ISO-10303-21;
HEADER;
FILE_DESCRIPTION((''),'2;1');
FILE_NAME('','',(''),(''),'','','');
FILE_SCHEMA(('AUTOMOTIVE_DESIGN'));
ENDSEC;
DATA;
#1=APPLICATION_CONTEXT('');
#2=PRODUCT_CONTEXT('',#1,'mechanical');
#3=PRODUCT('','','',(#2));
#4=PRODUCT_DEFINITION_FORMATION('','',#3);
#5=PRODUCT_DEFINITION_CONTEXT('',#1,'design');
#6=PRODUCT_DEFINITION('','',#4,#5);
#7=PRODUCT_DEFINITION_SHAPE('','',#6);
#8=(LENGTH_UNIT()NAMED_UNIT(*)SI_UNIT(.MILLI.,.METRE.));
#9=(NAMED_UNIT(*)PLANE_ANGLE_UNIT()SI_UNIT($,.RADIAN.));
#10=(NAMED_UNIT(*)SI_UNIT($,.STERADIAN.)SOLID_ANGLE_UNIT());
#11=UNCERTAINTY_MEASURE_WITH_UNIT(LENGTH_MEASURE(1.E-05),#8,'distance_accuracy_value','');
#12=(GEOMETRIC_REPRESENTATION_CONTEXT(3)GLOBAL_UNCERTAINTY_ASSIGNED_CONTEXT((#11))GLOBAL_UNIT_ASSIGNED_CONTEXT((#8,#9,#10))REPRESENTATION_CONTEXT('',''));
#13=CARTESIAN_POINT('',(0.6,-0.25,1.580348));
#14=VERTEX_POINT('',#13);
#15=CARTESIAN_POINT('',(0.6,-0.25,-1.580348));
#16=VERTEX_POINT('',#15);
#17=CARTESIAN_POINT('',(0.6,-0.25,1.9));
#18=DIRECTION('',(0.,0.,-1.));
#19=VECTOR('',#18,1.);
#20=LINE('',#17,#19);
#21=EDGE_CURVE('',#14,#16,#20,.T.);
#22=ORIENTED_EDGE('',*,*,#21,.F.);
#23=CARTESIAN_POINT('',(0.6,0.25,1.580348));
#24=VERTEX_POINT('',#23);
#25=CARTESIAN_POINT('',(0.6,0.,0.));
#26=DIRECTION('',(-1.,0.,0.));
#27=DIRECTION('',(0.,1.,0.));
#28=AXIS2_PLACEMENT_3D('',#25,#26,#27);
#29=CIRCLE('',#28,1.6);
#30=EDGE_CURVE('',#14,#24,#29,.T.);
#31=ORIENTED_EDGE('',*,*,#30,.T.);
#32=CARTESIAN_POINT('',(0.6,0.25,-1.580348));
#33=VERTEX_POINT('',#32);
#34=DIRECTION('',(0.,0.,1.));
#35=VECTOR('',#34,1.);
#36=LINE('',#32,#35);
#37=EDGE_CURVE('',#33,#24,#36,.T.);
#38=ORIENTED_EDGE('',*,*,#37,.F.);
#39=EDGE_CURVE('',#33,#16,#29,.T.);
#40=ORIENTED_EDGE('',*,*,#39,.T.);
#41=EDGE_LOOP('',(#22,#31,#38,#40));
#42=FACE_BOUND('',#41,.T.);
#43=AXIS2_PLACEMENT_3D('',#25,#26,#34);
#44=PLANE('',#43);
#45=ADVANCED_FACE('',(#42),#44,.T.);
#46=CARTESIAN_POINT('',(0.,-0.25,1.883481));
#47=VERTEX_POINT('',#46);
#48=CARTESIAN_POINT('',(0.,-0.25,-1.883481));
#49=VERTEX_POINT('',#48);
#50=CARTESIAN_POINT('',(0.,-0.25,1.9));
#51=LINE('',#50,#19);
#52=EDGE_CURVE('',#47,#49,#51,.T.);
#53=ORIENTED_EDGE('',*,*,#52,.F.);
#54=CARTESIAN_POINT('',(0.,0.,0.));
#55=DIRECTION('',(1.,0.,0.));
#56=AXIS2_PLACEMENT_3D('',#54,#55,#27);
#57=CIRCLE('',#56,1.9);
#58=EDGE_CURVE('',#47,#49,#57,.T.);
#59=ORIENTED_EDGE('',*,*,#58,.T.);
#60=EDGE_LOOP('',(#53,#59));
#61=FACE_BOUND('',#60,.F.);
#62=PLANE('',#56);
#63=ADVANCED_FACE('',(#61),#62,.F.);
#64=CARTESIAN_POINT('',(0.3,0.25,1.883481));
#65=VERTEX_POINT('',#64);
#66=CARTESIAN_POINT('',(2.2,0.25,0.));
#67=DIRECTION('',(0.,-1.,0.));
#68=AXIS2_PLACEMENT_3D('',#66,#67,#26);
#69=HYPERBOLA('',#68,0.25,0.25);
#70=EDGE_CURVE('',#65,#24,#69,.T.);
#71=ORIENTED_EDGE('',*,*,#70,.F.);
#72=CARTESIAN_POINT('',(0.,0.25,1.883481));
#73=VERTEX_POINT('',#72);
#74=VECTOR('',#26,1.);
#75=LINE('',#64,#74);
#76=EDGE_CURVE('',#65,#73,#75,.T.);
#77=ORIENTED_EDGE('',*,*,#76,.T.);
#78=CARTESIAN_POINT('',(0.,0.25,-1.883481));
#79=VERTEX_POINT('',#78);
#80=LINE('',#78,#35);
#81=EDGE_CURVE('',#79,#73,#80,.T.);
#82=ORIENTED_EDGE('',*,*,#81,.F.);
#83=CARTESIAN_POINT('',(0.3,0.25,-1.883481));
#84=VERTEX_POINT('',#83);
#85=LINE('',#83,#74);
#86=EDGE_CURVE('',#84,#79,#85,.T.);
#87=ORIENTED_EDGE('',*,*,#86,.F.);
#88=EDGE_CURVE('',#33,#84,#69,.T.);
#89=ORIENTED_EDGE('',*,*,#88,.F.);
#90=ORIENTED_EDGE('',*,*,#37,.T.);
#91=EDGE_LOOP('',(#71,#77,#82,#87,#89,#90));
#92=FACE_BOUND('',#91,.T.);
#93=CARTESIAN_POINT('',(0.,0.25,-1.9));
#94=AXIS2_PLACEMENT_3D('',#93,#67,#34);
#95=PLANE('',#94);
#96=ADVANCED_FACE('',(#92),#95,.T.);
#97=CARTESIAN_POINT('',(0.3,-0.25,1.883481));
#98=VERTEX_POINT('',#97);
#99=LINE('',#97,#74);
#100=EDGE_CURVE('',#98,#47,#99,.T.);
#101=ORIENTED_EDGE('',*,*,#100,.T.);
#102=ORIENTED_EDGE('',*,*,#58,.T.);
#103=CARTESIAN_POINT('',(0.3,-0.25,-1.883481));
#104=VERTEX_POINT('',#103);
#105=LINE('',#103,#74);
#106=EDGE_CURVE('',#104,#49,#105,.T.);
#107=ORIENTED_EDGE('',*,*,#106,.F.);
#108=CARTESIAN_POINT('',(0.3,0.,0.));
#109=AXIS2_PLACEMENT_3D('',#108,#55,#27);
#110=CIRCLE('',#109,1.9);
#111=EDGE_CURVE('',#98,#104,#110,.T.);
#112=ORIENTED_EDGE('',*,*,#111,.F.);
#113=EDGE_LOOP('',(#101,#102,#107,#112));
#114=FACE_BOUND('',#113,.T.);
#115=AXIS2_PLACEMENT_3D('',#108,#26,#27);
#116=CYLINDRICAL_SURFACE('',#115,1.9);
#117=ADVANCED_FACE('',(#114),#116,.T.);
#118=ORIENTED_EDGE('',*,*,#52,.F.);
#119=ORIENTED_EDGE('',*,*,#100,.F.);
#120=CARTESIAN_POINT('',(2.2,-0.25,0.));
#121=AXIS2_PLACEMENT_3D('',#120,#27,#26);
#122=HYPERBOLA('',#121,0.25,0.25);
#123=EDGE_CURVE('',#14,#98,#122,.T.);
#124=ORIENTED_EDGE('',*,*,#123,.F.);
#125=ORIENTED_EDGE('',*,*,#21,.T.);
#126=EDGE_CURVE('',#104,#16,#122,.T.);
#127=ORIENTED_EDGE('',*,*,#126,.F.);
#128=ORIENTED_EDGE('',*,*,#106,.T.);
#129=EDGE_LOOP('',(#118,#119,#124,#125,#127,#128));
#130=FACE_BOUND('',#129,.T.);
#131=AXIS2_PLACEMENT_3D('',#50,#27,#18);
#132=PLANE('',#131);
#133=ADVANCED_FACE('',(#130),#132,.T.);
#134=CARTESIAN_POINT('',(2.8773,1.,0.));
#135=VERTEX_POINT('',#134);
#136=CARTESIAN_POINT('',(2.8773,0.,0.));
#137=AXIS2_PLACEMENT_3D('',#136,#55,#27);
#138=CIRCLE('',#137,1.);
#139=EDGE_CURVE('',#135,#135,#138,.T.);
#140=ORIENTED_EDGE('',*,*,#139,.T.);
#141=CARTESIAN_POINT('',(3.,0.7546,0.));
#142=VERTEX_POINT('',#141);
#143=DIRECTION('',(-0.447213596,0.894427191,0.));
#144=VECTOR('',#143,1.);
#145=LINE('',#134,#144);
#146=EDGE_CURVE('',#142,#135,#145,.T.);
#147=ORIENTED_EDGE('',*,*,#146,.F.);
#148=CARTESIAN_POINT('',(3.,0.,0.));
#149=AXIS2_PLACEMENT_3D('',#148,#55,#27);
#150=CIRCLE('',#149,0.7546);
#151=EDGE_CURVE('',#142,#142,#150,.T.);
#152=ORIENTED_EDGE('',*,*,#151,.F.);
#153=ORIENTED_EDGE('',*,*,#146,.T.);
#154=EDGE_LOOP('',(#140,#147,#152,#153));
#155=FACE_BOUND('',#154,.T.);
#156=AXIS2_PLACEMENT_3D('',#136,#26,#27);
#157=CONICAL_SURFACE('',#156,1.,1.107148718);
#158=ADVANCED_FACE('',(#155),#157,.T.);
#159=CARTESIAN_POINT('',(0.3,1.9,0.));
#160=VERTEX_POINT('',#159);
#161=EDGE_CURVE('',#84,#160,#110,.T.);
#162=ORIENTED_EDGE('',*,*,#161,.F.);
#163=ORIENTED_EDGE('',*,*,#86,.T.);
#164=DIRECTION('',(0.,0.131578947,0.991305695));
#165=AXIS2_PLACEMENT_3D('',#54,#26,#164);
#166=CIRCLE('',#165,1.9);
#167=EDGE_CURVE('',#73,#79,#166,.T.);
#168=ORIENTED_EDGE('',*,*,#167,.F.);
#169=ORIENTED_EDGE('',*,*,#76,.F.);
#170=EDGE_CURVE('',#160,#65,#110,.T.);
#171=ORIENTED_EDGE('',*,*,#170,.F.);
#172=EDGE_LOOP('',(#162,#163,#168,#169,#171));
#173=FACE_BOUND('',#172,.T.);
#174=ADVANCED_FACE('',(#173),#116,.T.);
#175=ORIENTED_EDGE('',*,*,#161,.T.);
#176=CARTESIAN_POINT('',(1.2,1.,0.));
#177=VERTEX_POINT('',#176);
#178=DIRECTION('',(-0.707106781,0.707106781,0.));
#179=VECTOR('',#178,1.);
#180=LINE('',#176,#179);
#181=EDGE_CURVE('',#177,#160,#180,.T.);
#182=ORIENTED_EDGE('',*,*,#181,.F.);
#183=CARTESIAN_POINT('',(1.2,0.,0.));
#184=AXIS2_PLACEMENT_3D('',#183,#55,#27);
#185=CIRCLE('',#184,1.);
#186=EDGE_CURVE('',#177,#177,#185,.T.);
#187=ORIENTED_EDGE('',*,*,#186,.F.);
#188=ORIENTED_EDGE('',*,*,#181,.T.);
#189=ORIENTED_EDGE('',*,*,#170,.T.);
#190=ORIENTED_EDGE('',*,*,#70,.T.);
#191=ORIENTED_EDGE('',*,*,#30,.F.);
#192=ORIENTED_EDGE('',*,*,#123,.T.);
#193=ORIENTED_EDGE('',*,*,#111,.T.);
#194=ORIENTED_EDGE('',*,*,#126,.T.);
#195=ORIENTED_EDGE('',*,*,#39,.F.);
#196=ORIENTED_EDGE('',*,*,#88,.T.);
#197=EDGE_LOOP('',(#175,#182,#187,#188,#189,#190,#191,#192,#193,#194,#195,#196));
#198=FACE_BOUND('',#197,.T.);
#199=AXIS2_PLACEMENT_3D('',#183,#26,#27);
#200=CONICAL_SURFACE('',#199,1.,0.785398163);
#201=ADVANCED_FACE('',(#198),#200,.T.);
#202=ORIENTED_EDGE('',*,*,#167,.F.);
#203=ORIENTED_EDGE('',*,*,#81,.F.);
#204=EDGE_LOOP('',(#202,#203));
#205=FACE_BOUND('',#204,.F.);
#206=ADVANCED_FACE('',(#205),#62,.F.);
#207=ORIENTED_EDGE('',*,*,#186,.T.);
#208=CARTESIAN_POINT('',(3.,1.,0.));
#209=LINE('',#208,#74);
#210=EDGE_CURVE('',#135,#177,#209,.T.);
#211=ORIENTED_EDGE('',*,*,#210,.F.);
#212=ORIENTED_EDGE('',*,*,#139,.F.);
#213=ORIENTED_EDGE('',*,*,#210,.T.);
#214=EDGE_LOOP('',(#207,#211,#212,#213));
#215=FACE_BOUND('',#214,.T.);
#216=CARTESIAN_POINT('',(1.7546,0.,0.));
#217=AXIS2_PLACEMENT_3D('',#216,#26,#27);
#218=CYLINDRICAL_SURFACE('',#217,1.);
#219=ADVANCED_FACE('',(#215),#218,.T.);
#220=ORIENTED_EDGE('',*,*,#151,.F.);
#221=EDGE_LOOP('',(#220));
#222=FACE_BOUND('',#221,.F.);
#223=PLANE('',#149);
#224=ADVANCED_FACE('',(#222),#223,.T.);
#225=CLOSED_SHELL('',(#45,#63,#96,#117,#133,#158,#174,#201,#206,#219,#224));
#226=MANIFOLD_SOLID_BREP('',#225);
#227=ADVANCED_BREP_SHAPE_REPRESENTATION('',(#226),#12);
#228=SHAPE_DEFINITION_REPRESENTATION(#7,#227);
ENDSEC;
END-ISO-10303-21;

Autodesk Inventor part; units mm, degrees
ref_plane "YZ Plane" through (0, 0, 0) normal (1, 0, 0) x (0, 1, 0)
ref_plane "XZ Plane" through (0, 0, 0) normal (0, 1, 0) x (-1, 0, 0)
sketch "Sketch1" plane through (0, 0, 0) normal (0, 0, 1) x (1, 0, 0)
  line L0 (0, 0) -> (3, 0)
  line L1 (3, 0) -> (3, 1)
  line L2 (3, 1) -> (2, 1)
  line L3 (2, 1) -> (1.7546, 1)
  line L4 (1.7546, 1) -> (1.2, 1)
  line L5 (1.2, 1) -> (0.3, 1.9)
  line L6 (0.3, 1.9) -> (0, 1.9)
  line L7 (0, 1.9) -> (0, 0)
  line L8 (2, 1) -> (1.2, 1) construction
  line L9 (-0.6, 0) -> (3.6, 0) projected
  line L10 (0, 2.28) -> (0, -0.38) projected
  dimension "d0" = 3
  dimension "d1" = 45
  dimension "d2" = 0.2454
  dimension "d3" = 1
  dimension "d4" = 1.2
  dimension "d5" = 2
  dimension "d6" = 2
  dimension "d7" = 3.8
revolve "Body" add sketch "Sketch1" angle 360 about axis through (0, 0, 0) along (1, 0, 0)
sketch "Sketch2" plane through (0, 0, 0) normal (-1, 0, 0) x (0, 0, 1)
  line L0 (1.9, -0.25) -> (-1.9, -0.25)
  line L1 (-1.9, -0.25) -> (-1.9, 0.25)
  line L2 (-1.9, 0.25) -> (1.9, 0.25)
  line L3 (1.9, 0.25) -> (1.9, -0.25)
  line L4 (0, 0.25) -> (0, -0.25) construction
  line L5 (-1.9, 0) -> (1.9, 0) construction
  line L6 (0, 1.9) -> (0, 0) projected
  dimension "d15" = 0.5
  dimension "d16" = 3.8
extrude "Slot" cut sketch "Sketch2" against normal blind 0.6
thread "Thread" size "M2x0.4" class "6g" standard "ISO Metric profile" length 1
chamfer "Chamfer1" distance 0.2454 distance2 0.1227 1 edges at (3, -1, 0) measured on face at (3, 0.3275, -0.4215)
ref_plane "Work Plane1" through (33.575, 0, 0) normal (0, 0, -1) x (1, 0, 0)
equation "\"d0\" = NLG"
equation "\"d1\" = 0.5 * SEWI"
equation "\"d2\" = GAL"
equation "\"d3\" = GEL"
equation "\"d4\" = KOH"
equation "\"d5\" = BDM"
equation "\"d6\" = GD"
equation "\"d7\" = KOD"
equation "\"d15\" = SBR"
equation "\"d16\" = KOD"
equation "\"d8\" = STI"
equation "\"d10\" = GEL"
equation "\"d12\" = -0.5 * SPD + 0.5 * GD"
equation "\"d13\" = 0.5 * GAL"
equation "\"NLG\" = 3"
equation "\"GAL\" = 0.61345 * PTC"
equation "\"GEL\" = 1"
equation "\"KOH\" = 1.2"
equation "\"KOD\" = 3.8"
equation "\"SEWI\" = 90deg"
equation "\"BDM\" = NND"
equation "\"GD\" = NND"
equation "\"SBR\" = 0.5"
equation "\"STI\" = 0.6"
equation "\"SPD\" = NND - 1.2269 * PTC"
equation "\"GUL\" = 0.61345 * PTC"
equation "\"PTC\" = 0.4"
equation "\"EPV\" = 2.2"
equation "\"THREADDIA\" = 2"
equation "\"TOA\" = 30deg"
equation "\"NND\" = 2"
equation "\"GD1\" = THREADDIA - 1.2269 * PTC"
properties part number "DIN 963 - M2 x 3" material "Steel, Mild"
